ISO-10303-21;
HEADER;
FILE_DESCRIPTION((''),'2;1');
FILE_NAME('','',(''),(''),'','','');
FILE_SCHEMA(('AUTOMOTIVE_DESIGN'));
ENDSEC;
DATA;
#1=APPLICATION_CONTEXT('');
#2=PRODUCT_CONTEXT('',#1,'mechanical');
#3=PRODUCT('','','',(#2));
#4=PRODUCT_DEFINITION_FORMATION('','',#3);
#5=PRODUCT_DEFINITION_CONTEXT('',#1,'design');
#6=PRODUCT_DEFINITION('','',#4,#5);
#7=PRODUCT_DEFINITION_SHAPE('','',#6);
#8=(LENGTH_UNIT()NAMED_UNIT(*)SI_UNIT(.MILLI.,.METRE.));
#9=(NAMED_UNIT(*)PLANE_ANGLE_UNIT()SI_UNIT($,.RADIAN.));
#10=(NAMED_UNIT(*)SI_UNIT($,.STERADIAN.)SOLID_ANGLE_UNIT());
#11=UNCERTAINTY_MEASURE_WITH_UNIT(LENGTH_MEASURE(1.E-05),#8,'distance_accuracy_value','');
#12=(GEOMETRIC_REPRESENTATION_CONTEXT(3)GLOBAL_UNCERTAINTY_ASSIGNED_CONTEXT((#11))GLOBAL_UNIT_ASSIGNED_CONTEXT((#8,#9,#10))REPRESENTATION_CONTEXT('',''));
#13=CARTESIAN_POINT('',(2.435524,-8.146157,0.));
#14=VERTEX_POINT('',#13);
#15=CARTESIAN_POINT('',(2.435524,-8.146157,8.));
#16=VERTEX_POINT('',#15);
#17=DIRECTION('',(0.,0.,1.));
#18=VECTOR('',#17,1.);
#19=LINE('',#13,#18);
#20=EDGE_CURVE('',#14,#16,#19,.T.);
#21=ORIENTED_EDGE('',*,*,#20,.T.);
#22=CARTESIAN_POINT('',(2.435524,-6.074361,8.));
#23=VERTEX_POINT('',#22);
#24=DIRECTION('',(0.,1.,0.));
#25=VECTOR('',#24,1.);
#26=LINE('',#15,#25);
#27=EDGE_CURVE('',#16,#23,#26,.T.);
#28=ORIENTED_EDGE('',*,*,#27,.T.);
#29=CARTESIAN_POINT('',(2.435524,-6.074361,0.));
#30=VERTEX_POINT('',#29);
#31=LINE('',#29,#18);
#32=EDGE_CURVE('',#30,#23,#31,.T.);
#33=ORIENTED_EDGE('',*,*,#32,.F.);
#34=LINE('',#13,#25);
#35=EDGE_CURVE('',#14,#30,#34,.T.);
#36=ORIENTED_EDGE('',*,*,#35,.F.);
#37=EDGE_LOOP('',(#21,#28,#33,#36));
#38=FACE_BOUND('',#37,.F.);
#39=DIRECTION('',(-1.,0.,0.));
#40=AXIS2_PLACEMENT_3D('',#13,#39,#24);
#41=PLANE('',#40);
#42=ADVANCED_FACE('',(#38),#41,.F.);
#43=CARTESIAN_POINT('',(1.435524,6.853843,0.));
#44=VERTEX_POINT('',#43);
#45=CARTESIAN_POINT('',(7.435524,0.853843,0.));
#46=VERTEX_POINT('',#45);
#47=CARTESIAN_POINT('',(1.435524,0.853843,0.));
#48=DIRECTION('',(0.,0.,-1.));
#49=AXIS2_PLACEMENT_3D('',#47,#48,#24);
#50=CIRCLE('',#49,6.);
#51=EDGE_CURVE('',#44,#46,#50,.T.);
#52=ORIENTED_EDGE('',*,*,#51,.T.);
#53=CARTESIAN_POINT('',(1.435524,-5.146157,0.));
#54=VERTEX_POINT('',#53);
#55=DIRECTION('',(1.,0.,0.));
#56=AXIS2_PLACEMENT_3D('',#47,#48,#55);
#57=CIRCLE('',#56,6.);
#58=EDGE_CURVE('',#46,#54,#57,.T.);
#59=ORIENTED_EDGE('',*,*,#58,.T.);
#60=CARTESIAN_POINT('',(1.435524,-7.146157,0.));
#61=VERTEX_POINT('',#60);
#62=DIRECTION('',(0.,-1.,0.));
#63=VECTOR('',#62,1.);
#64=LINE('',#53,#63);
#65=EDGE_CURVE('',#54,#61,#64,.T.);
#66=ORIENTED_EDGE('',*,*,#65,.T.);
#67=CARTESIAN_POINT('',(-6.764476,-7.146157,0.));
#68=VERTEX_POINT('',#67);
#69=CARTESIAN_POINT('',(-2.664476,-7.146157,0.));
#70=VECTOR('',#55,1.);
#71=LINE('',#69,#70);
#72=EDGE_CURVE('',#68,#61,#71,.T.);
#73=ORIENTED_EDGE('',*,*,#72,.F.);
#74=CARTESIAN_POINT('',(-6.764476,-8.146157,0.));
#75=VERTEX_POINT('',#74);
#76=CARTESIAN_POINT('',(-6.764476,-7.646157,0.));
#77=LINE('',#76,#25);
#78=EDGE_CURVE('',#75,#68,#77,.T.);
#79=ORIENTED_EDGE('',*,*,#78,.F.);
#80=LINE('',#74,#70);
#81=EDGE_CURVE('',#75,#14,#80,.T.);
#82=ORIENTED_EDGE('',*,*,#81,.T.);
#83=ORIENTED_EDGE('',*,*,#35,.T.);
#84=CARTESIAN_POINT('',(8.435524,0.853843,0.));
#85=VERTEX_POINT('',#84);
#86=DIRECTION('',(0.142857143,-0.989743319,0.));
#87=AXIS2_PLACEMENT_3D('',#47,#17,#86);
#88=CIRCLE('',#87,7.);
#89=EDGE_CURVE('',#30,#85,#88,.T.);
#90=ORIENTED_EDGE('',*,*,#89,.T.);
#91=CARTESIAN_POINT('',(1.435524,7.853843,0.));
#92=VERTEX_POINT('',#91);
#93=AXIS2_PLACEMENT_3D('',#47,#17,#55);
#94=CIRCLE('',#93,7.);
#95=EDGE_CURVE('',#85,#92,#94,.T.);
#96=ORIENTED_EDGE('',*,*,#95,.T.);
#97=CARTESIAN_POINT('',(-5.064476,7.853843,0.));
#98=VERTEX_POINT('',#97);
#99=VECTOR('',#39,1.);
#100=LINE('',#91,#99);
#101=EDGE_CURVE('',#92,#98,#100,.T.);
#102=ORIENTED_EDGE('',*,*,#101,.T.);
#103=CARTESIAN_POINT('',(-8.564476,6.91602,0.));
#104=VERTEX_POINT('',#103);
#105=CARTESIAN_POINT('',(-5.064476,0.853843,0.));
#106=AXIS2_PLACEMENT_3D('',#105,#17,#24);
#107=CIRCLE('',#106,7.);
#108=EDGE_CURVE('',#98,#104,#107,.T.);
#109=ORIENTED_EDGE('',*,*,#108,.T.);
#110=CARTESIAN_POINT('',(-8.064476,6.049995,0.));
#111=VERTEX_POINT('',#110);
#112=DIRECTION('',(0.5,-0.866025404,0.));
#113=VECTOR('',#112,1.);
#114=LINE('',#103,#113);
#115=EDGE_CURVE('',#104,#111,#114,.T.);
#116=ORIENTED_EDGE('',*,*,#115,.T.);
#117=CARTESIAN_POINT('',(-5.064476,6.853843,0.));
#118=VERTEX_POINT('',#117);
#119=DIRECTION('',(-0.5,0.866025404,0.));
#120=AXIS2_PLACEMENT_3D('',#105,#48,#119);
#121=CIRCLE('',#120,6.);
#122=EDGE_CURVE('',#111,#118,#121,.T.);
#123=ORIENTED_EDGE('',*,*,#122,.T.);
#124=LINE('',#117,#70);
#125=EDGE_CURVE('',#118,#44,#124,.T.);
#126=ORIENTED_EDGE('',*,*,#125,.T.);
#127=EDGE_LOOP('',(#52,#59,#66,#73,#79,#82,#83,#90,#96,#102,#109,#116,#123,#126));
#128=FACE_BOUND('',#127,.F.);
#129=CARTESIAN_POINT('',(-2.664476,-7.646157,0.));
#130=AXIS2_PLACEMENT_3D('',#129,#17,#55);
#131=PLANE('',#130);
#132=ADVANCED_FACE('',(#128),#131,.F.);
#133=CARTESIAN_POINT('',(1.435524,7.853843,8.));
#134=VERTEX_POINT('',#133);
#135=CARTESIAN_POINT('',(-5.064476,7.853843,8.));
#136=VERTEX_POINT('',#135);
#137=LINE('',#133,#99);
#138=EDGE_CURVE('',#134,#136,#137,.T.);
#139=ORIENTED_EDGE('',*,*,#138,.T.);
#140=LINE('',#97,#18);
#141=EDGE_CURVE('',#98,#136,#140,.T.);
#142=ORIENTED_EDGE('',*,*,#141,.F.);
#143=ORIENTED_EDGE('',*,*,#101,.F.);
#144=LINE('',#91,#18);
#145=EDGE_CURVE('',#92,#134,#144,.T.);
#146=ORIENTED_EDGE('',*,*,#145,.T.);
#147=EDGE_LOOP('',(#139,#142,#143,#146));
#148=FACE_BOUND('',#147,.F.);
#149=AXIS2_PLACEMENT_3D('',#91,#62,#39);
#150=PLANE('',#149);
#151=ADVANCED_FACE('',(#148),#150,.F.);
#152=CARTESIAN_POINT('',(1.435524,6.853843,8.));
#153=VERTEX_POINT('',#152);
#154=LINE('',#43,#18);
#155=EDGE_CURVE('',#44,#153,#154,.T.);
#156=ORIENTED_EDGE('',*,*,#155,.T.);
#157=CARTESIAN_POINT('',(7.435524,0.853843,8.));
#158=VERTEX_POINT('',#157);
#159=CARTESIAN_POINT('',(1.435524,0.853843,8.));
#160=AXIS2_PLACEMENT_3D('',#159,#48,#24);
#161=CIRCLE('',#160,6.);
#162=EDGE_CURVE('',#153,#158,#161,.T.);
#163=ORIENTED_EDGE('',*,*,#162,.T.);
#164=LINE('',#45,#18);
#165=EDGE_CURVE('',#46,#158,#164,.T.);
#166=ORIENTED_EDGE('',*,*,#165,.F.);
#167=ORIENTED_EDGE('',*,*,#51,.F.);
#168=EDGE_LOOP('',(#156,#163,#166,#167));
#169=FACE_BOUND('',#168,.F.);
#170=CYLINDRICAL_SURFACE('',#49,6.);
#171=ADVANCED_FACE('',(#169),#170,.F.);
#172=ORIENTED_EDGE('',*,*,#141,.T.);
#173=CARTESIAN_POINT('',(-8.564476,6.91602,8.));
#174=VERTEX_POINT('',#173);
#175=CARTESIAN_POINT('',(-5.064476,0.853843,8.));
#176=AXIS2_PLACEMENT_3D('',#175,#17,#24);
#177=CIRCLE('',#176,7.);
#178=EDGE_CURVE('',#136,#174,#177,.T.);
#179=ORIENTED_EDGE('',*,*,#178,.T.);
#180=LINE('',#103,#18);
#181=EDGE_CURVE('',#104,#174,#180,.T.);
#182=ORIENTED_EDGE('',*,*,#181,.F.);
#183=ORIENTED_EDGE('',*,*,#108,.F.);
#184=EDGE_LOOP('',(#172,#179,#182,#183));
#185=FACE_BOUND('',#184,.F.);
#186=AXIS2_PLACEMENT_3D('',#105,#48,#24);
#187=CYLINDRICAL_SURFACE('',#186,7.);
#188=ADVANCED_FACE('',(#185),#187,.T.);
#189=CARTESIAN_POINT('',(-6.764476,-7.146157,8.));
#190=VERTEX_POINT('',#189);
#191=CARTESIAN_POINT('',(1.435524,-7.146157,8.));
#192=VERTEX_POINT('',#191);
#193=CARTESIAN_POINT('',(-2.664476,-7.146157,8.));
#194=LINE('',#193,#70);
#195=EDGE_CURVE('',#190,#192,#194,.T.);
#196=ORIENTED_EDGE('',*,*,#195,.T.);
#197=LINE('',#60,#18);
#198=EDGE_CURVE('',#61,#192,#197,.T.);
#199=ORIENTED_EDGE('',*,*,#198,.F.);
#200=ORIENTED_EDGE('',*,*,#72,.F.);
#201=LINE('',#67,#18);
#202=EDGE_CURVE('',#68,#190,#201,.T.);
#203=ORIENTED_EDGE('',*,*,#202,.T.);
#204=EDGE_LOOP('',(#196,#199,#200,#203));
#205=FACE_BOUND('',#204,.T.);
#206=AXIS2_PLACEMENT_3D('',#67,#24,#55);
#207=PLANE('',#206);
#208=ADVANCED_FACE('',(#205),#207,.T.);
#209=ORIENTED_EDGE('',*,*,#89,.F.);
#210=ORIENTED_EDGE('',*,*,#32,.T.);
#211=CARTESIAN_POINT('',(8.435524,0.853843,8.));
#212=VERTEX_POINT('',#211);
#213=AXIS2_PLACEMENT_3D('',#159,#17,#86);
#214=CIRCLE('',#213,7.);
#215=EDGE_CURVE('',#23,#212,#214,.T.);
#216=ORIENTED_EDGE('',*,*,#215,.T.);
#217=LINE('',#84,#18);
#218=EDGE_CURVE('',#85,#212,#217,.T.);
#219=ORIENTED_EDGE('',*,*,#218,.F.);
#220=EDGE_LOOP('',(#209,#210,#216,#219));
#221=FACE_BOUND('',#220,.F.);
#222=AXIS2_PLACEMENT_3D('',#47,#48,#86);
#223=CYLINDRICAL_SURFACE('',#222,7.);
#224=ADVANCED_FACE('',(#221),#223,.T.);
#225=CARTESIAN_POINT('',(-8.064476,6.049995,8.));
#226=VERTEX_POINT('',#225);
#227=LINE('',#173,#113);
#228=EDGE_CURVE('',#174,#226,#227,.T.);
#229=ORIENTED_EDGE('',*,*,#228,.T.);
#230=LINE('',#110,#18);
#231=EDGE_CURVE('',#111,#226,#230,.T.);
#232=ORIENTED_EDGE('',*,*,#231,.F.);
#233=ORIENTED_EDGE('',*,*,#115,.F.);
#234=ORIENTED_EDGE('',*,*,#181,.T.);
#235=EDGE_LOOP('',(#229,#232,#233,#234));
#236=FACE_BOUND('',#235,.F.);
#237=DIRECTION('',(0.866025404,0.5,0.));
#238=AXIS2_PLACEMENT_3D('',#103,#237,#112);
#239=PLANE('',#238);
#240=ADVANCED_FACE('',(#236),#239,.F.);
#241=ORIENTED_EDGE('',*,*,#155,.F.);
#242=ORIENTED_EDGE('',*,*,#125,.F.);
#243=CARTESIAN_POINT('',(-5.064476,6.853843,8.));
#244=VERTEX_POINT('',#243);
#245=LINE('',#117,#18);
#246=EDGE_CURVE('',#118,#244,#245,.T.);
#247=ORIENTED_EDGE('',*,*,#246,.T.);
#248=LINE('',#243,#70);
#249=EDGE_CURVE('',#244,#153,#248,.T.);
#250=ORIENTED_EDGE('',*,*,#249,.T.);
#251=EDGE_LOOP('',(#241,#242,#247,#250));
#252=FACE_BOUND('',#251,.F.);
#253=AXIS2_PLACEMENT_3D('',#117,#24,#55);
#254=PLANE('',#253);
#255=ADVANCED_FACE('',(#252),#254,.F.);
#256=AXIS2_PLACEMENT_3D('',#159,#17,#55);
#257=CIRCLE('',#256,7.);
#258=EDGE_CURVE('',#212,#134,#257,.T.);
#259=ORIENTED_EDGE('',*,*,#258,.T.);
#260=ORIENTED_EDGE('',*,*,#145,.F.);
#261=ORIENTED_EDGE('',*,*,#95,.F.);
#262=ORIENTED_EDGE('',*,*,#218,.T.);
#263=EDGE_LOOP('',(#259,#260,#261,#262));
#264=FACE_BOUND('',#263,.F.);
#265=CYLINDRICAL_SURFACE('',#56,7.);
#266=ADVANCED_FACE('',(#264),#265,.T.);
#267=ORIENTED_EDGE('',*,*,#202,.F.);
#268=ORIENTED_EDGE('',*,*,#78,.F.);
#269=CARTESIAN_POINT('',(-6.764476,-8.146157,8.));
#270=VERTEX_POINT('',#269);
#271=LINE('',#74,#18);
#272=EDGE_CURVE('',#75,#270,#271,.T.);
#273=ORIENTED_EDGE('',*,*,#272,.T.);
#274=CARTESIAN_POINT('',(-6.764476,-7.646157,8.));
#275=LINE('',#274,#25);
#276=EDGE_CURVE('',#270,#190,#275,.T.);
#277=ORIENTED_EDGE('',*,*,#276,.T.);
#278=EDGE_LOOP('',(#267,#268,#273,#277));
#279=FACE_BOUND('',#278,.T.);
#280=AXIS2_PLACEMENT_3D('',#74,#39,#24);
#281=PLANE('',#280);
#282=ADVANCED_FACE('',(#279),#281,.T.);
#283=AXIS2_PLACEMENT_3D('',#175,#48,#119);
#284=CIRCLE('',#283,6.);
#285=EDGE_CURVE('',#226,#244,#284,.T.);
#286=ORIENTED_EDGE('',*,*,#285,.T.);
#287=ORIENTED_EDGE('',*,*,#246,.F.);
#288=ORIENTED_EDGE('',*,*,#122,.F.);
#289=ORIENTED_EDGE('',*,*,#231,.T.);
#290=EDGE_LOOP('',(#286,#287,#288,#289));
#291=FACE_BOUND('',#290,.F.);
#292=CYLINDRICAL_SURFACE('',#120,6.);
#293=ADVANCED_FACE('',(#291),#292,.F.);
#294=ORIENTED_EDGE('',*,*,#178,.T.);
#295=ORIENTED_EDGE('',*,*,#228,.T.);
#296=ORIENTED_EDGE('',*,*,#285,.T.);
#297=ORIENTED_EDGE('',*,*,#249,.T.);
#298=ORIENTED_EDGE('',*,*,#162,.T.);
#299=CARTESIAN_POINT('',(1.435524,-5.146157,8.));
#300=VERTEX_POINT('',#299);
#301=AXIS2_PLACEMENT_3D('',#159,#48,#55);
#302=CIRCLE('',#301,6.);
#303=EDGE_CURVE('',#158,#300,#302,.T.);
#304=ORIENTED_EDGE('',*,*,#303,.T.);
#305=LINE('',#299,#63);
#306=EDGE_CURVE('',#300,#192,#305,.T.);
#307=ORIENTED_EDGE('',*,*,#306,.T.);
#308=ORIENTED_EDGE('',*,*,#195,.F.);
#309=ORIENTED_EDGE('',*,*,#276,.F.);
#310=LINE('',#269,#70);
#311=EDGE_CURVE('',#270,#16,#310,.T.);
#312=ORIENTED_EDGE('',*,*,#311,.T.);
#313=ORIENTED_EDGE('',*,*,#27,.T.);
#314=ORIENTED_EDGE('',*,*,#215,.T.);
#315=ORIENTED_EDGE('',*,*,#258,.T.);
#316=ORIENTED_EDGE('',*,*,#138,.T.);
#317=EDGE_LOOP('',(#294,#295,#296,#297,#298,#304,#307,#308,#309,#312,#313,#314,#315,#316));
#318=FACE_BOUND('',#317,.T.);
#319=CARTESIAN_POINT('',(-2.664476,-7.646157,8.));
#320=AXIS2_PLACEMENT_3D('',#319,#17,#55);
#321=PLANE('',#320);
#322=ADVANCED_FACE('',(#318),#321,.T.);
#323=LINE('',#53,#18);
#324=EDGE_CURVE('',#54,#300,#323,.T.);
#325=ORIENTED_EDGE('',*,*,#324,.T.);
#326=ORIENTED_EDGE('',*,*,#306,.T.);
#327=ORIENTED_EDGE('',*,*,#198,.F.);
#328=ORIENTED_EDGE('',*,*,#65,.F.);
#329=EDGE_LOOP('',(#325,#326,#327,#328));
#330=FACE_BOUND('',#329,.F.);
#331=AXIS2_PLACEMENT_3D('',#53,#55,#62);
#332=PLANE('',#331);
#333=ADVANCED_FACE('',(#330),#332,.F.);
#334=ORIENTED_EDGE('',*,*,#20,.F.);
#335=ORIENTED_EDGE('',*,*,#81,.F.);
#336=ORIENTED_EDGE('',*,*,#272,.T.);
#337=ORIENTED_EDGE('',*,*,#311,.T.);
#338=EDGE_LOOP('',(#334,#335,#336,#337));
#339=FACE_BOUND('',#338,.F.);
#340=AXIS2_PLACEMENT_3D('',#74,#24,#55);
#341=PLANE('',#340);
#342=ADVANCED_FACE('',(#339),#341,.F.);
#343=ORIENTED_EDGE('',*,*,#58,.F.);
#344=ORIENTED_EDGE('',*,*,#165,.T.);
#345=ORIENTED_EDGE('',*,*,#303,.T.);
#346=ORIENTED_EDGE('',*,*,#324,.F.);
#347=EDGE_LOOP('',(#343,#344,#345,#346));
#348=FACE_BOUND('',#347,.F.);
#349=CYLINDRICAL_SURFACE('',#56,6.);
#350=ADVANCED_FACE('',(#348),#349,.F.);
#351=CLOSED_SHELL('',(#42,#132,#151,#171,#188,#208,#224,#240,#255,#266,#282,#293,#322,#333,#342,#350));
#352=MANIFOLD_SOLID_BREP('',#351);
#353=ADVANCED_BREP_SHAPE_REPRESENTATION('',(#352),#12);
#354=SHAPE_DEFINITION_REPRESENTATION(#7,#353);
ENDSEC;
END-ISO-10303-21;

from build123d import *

# Parameters (mm, degrees)
F0_W     = 8.2
F0_H     = 1
F1_DEPTH = 8


with BuildPart() as f1:
    # F0 (on Top) → F1 (new body)
    with BuildSketch(Plane.XY):
        with Locations((-2.6644755177, -7.6461574882)):
            Rectangle(F0_W, F0_H)
        with BuildLine():
            Line((1.4355244823, -6.1461574882), (1.4355244823, -7.1461574882))
            Line((1.4355244823, -7.1461574882), (1.4355244823, -8.1461574882))
            Line((1.4355244823, -8.1461574882), (2.4355244823, -8.1461574882))
            Line((2.4355244823, -8.1461574882), (2.4355244823, -6.0743607185))
            ThreePointArc((2.4355244823, -6.0743607185), (1.9368115199, -6.1281852242), (1.4355244823, -6.1461574882))
        make_face()
        with BuildLine():
            Line((1.4355244823, -5.1461574882), (1.4355244823, -6.1461574882))
            ThreePointArc((1.4355244823, -6.1461574882), (1.9368115199, -6.1281852242), (2.4355244823, -6.0743607185))
            Line((2.4355244823, -6.0743607185), (2.4355244823, -5.1461574882))
            Line((2.4355244823, -5.1461574882), (1.4355244823, -5.1461574882))
        make_face()
        with BuildLine():
            ThreePointArc((7.4355244823, 0.8538425118), (5.6781651694, -3.3887981753), (1.4355244823, -5.1461574882))
            Line((1.4355244823, -5.1461574882), (2.4355244823, -5.1461574882))
            Line((2.4355244823, -5.1461574882), (2.4355244823, -6.0743607185))
            ThreePointArc((2.4355244823, -6.0743607185), (6.7270271044, -3.7287331832), (8.4355244823, 0.8538425118))
            ThreePointArc((8.4355244823, 0.8538425118), (6.3852719506, 5.8035899801), (1.4355244823, 7.8538425118))
            Line((1.4355244823, 7.8538425118), (1.4355244823, 6.8538425118))
            ThreePointArc((1.4355244823, 6.8538425118), (5.6781651694, 5.0964831989), (7.4355244823, 0.8538425118))
        make_face()
        with BuildLine():
            ThreePointArc((-5.0644755177, 7.8538425118), (-6.8762088334, 7.6153232958), (-8.5644755177, 6.9160203383))
            Line((-8.5644755177, 6.9160203383), (-8.0644755177, 6.0499949345))
            ThreePointArc((-8.0644755177, 6.0499949345), (-6.6173897883, 6.6493974695), (-5.0644755177, 6.8538425118))
            Line((-5.0644755177, 6.8538425118), (-5.0644755177, 7.8538425118))
        make_face()
        with BuildLine():
            Line((-1.4589242423, 6.8538425118), (1.4355244823, 6.8538425118))
            Line((1.4355244823, 6.8538425118), (1.4355244823, 7.8538425118))
            ThreePointArc((1.4355244823, 7.8538425118), (-0.2380064128, 7.6508487898), (-1.8144755177, 7.0536408956))
            ThreePointArc((-1.8144755177, 7.0536408956), (-1.6352444565, 6.956331703), (-1.4589242423, 6.8538425118))
        make_face()
        with BuildLine():
            ThreePointArc((-1.8144755177, 7.0536408956), (-3.3909446227, 7.6508487898), (-5.0644755177, 7.8538425118))
            Line((-5.0644755177, 7.8538425118), (-5.0644755177, 6.8538425118))
            Line((-5.0644755177, 6.8538425118), (-2.1700267932, 6.8538425118))
            ThreePointArc((-2.1700267932, 6.8538425118), (-1.9937065789, 6.956331703), (-1.8144755177, 7.0536408956))
        make_face()
        with BuildLine():
            Line((1.4355244823, 7.8538425118), (-5.0644755177, 7.8538425118))
            ThreePointArc((-5.0644755177, 7.8538425118), (-3.3909446227, 7.6508487898), (-1.8144755177, 7.0536408956))
            ThreePointArc((-1.8144755177, 7.0536408956), (-0.2380064128, 7.6508487898), (1.4355244823, 7.8538425118))
        make_face()
        with BuildLine():
            Line((-2.1700267932, 6.8538425118), (-1.4589242423, 6.8538425118))
            ThreePointArc((-1.4589242423, 6.8538425118), (-1.6352444565, 6.956331703), (-1.8144755177, 7.0536408956))
            ThreePointArc((-1.8144755177, 7.0536408956), (-1.9937065789, 6.956331703), (-2.1700267932, 6.8538425118))
        make_face()
    extrude(amount=F1_DEPTH)


solid = f1.part
